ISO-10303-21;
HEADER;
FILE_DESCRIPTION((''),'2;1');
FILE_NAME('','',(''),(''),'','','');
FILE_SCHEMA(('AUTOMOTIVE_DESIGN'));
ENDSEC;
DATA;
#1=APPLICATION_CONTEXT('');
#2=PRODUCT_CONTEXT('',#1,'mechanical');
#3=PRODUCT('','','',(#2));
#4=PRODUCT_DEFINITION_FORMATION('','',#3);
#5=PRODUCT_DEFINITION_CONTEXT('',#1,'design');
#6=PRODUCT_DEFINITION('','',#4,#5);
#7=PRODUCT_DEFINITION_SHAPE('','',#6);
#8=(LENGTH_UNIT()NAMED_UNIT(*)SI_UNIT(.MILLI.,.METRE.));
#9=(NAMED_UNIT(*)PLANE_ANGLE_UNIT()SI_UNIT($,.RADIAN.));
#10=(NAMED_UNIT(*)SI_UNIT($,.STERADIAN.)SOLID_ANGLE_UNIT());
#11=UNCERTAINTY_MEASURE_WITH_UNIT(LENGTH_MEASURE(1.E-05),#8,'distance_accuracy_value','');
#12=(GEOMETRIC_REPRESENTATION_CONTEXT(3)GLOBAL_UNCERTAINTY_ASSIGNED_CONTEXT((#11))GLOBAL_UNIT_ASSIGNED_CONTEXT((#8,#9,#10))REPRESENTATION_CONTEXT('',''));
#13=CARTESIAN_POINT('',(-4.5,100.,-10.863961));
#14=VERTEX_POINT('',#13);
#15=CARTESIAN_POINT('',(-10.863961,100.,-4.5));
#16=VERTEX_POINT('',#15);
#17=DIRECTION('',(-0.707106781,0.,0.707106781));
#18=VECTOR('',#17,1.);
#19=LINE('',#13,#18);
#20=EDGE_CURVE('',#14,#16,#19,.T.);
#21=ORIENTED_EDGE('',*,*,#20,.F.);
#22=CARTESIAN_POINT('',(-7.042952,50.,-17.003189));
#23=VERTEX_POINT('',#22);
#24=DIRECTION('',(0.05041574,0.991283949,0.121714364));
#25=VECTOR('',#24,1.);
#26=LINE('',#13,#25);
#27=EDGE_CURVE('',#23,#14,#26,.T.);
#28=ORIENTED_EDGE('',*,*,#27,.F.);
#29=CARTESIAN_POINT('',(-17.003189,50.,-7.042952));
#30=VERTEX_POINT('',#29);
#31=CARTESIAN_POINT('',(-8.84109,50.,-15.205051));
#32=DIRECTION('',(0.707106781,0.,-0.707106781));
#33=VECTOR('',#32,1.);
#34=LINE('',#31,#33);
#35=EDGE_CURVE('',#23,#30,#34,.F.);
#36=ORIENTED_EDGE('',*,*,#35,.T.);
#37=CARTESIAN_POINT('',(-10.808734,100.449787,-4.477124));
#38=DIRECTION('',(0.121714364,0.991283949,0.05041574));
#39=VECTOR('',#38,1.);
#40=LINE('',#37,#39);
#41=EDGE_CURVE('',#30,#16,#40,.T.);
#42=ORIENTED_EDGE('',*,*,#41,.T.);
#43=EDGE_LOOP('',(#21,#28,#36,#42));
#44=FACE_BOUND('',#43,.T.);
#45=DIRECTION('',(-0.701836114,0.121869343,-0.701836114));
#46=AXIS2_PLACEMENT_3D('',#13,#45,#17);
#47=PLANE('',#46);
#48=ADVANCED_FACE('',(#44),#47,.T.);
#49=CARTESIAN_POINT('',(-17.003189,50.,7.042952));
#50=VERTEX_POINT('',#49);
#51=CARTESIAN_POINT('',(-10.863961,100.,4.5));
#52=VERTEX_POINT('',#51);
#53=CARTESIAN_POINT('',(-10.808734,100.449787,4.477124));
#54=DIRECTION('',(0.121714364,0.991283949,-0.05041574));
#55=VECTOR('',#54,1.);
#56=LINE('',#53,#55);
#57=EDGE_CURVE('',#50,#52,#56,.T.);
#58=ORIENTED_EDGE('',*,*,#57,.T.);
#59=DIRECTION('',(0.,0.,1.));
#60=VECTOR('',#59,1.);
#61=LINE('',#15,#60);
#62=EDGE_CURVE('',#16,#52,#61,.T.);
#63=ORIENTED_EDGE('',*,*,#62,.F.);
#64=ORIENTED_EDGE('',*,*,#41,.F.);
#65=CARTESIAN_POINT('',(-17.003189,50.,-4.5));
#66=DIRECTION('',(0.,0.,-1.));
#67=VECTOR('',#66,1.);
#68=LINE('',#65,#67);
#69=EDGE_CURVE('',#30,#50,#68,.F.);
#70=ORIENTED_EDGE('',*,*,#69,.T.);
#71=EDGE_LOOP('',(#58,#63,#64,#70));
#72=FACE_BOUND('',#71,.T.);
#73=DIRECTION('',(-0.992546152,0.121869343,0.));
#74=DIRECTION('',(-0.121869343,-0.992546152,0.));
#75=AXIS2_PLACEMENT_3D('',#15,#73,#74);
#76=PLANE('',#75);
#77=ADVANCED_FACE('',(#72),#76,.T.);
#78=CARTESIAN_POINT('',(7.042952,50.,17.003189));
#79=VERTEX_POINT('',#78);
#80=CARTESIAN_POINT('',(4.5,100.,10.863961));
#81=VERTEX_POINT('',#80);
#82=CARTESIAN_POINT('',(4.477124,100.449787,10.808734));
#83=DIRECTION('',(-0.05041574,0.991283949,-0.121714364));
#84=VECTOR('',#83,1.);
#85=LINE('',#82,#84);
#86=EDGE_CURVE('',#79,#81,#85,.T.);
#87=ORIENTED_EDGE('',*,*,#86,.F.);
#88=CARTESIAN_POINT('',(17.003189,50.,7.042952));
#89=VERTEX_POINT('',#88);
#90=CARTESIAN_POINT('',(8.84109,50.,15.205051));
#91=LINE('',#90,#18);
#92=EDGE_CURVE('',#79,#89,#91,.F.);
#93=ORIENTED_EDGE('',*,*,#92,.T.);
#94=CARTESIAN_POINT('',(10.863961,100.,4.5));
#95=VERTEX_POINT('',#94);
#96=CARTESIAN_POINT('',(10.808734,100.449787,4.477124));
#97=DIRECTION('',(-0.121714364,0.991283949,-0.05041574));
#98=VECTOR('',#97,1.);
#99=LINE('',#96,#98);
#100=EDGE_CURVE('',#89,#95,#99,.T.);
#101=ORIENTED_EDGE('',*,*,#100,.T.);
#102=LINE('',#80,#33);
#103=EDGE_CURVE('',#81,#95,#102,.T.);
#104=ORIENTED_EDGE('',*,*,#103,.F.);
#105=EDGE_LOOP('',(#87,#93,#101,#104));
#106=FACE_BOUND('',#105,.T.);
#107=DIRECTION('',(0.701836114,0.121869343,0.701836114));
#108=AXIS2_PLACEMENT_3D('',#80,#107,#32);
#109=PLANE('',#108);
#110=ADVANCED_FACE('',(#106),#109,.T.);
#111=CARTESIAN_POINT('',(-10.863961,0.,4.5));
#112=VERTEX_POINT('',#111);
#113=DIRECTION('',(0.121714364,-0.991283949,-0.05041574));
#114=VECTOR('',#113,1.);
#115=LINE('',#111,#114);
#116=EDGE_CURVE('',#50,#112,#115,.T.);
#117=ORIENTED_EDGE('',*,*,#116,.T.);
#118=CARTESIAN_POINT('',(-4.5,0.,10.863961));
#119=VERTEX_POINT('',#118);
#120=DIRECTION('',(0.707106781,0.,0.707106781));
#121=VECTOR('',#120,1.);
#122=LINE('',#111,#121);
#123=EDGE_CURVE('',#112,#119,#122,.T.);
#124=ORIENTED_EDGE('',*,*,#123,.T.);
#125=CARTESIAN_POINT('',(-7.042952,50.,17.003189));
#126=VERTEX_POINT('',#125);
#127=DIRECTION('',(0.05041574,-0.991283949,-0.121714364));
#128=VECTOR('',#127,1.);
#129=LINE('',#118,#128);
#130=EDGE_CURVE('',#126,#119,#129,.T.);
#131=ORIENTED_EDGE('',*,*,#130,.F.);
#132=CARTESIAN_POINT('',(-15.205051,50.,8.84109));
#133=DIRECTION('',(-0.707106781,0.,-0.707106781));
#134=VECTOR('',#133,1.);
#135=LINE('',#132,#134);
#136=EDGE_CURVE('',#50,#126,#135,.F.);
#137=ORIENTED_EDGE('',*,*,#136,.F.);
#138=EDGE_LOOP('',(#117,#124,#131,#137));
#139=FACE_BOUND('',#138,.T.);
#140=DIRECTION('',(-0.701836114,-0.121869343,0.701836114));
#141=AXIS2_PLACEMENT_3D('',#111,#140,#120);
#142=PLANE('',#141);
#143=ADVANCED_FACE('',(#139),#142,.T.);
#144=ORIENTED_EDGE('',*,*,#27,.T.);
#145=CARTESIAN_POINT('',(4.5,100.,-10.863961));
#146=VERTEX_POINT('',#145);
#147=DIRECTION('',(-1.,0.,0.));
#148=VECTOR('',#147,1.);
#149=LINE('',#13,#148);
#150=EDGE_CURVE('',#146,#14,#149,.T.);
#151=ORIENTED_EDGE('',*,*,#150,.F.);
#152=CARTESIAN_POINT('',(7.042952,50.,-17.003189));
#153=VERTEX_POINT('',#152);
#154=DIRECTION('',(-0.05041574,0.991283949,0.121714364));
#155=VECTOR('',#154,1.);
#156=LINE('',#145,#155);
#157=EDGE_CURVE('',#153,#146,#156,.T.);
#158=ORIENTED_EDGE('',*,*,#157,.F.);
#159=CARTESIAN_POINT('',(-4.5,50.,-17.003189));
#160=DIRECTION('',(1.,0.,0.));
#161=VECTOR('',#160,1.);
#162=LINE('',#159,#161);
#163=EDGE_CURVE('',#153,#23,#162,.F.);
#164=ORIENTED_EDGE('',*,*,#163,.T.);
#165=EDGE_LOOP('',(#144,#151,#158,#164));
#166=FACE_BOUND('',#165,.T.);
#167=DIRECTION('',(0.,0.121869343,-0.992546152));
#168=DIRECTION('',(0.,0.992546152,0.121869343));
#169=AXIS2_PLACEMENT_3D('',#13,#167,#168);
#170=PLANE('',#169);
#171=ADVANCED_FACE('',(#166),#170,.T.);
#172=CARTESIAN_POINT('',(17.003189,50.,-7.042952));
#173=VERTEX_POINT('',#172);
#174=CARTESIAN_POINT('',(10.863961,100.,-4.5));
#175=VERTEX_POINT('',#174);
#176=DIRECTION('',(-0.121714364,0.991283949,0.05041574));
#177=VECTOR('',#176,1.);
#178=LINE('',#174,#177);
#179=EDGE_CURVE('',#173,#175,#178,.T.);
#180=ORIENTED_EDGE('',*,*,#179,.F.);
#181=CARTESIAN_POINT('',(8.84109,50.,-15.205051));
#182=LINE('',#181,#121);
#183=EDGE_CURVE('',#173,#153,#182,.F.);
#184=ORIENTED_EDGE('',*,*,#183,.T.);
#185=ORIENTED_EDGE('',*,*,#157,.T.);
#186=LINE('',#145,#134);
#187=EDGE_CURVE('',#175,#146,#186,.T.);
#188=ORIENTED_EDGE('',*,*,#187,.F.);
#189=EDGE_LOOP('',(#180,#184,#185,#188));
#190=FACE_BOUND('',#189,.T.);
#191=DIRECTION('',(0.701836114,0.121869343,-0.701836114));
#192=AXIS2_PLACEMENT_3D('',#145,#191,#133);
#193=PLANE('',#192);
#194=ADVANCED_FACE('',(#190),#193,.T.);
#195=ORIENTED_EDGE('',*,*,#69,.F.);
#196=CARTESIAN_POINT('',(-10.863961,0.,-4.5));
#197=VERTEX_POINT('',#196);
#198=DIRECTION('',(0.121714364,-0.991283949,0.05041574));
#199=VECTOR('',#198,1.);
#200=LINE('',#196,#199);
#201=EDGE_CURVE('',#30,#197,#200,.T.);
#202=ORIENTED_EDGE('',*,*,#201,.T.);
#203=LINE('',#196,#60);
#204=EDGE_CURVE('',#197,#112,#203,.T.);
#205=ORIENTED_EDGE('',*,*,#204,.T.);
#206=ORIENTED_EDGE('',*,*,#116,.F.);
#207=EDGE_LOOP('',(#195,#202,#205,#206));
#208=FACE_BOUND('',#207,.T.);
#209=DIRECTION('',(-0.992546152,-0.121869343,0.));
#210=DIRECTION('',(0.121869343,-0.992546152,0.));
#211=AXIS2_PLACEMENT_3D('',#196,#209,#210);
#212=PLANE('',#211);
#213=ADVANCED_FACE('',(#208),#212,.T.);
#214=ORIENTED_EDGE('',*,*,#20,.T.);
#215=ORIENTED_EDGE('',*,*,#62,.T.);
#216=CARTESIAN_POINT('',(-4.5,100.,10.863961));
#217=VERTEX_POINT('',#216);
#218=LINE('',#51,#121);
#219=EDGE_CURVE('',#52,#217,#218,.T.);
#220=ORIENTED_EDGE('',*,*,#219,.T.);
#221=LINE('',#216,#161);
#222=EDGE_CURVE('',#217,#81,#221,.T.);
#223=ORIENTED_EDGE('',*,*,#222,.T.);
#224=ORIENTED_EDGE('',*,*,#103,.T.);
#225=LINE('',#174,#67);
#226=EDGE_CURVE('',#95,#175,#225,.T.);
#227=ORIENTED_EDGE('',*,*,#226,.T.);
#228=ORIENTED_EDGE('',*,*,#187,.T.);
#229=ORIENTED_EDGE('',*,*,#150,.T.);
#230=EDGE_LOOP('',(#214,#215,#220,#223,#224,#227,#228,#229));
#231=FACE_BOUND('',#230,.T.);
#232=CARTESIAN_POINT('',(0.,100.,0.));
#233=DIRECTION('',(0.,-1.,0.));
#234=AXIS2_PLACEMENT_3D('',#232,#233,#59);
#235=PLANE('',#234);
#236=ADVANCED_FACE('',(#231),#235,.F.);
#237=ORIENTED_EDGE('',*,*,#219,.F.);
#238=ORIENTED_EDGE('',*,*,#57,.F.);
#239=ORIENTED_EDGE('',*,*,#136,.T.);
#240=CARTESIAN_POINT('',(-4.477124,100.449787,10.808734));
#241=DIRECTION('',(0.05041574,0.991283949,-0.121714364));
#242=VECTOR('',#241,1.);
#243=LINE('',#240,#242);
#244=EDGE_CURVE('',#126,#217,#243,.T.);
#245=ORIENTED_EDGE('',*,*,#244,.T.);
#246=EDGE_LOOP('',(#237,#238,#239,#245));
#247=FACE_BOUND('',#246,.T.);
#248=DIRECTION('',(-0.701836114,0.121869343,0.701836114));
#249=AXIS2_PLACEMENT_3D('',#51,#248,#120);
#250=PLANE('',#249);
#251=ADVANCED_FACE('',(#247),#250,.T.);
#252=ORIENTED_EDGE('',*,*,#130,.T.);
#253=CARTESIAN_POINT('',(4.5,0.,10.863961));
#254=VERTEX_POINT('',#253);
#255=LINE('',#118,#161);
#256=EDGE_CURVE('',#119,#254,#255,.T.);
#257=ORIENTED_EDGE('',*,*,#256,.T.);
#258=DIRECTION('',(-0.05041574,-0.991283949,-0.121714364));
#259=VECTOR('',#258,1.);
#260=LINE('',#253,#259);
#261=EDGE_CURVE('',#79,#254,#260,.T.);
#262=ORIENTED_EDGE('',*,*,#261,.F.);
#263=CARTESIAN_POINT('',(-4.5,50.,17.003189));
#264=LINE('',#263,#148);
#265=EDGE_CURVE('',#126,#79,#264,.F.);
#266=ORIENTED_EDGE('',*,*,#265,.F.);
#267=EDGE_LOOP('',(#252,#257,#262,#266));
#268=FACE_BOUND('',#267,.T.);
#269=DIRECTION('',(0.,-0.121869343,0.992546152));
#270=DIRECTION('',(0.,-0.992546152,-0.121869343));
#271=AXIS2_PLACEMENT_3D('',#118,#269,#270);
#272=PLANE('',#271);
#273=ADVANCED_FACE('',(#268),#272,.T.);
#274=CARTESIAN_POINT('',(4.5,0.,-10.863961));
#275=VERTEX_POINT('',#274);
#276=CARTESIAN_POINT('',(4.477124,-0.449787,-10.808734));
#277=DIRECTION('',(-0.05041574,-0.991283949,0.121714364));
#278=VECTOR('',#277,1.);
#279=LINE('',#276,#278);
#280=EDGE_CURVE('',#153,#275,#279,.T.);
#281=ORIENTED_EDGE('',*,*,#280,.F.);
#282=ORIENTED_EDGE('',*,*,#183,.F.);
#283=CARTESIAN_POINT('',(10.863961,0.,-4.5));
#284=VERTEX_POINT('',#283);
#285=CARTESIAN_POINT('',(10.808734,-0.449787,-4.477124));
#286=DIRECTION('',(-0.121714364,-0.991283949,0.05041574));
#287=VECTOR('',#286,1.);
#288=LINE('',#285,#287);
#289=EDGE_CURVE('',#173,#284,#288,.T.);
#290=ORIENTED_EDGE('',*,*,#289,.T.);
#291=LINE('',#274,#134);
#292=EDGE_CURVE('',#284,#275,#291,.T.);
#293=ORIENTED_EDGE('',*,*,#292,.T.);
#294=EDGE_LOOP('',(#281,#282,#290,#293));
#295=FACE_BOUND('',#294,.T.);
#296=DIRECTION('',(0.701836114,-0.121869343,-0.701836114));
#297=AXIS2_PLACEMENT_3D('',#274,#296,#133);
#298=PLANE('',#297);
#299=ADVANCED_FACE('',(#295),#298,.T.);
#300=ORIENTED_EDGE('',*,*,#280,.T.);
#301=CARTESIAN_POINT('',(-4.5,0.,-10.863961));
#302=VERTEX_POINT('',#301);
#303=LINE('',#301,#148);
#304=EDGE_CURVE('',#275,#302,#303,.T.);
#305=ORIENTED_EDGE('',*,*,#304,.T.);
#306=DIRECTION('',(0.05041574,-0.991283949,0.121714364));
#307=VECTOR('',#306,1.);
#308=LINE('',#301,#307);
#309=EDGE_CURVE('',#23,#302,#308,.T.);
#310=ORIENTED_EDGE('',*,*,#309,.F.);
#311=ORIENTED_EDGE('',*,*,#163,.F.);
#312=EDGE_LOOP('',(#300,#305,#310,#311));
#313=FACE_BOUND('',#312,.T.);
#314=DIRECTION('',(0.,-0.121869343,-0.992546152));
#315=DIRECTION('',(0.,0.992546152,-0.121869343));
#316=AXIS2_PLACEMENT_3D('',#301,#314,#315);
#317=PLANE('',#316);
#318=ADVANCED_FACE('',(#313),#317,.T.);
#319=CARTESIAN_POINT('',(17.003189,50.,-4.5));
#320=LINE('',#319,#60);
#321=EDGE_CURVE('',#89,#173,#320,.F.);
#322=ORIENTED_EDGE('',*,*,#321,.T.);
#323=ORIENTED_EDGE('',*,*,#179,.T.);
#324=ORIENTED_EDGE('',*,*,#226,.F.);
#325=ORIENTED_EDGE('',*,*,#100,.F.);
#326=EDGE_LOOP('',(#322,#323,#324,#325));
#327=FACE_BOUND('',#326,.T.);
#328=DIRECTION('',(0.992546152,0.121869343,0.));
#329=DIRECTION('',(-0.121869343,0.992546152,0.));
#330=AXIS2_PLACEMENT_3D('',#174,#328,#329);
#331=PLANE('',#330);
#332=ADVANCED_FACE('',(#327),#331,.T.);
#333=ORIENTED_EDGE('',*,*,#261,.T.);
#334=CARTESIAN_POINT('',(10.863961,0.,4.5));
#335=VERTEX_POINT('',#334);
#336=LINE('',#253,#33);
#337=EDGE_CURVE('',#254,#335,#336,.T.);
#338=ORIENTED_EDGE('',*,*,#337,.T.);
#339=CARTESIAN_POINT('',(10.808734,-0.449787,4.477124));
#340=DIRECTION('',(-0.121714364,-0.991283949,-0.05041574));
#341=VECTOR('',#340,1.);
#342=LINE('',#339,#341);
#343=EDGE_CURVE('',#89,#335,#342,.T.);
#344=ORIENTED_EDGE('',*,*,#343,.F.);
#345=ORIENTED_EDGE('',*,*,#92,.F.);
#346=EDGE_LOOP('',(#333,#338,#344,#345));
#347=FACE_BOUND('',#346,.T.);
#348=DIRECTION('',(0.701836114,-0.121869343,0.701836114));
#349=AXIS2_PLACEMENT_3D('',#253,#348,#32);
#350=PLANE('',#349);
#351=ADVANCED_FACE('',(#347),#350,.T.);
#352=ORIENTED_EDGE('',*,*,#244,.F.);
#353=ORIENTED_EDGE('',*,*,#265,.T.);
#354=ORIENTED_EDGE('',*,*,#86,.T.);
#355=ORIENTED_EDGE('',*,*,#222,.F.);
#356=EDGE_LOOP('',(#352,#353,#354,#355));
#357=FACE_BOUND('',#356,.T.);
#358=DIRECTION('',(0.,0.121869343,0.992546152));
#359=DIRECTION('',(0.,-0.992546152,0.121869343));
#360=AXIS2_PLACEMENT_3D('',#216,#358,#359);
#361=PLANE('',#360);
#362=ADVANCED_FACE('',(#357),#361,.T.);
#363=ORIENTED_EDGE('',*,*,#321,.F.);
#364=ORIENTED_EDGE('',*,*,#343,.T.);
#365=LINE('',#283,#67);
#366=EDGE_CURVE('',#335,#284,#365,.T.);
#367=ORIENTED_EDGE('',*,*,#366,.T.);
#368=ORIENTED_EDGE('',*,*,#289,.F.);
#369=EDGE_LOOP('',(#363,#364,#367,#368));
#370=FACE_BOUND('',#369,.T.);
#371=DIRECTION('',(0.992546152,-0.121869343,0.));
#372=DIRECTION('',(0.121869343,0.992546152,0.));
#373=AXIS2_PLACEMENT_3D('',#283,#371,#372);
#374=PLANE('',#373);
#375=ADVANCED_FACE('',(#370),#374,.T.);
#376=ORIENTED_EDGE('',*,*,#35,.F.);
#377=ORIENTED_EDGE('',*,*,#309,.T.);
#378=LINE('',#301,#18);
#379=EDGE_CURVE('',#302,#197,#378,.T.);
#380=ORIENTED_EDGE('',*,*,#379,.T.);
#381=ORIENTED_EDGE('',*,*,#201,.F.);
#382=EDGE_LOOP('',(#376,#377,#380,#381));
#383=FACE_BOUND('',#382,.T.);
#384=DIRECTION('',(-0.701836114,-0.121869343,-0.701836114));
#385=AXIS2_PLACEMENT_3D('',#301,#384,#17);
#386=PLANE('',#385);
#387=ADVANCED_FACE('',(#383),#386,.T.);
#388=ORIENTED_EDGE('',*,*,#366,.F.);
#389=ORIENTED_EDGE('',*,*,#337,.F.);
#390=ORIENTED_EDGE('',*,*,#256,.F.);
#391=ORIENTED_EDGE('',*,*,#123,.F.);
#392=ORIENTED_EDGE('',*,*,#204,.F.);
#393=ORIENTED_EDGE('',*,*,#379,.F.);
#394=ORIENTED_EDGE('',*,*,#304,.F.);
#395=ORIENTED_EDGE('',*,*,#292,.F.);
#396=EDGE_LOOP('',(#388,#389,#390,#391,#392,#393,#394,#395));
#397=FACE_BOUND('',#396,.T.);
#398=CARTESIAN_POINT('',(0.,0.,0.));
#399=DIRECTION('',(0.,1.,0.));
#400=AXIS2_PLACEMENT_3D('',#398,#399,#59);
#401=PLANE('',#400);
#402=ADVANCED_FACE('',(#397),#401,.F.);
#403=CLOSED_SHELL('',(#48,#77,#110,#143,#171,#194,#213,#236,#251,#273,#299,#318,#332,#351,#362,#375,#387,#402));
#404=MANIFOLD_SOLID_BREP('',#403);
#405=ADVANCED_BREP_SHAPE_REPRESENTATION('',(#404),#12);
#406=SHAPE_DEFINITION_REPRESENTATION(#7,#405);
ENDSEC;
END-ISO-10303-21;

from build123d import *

# Parameters (mm, degrees)
BOSS_EXTRUDE1_DEPTH = 50
BOSS_EXTRUDE1_DRAFT = -7
MIRROR1_DEPTH       = 50
MIRROR1_DRAFT       = 7


# Read off the part's stored shape, not the designer's step: Mirror1
with BuildPart() as part:
    # Sketch2 → Boss-Extrude1 (with draft: the straight prism first)
    with BuildSketch(Plane(origin=(0, 0, 0), x_dir=(1, 0, 0), z_dir=(0, 1, 0))):
        Polygon((-10.863961031, 4.5), (-10.863961031, -4.5), (-4.5, -10.863961031), (4.5, -10.863961031), (10.863961031, -4.5), (10.863961031, 4.5), (4.5, 10.863961031), (-4.5, 10.863961031), align=None)
    extrude(amount=BOSS_EXTRUDE1_DEPTH)
    # Boss-Extrude1: the draft: its side faces are tilted about the plane it starts from
    boss_extrude1_sides = [part.faces().sort_by_distance(p)[0] for p in [
        (-10.863961031, 25, 0),
        (-7.681980515, 25, 7.681980515),
        (0, 25, 10.863961031),
        (7.681980515, 25, 7.681980515),
        (10.863961031, 25, 0),
        (7.681980515, 25, -7.681980515),
        (0, 25, -10.863961031),
        (-7.681980515, 25, -7.681980515),
    ]]
    draft(boss_extrude1_sides, Plane(origin=(0, 0, 0), x_dir=(1, 0, 0), z_dir=(0, 1, 0)), BOSS_EXTRUDE1_DRAFT)


with BuildPart() as mirror1_tool:
    # Mirror1 outline → Mirror1 (with draft: the straight prism first)
    with BuildSketch(Plane(origin=(0, 100, 0), x_dir=(1, 0, 0), z_dir=(0, 1, 0))):
        Polygon((-10.863961031, -4.5), (-4.5, -10.863961031), (4.5, -10.863961031), (10.863961031, -4.5), (10.863961031, 4.5), (4.5, 10.863961031), (-4.5, 10.863961031), (-10.863961031, 4.5), align=None)
    extrude(amount=-MIRROR1_DEPTH)
    # Mirror1: the draft: its side faces are tilted about the plane it starts from
    mirror1_sides = [mirror1_tool.faces().sort_by_distance(p)[0] for p in [
        (-7.681980515, 75, 7.681980516),
        (0, 75, 10.863961031),
        (7.681980516, 75, 7.681980515),
        (10.863961031, 75, 0),
        (7.681980515, 75, -7.681980516),
        (0, 75, -10.863961031),
        (-7.681980516, 75, -7.681980515),
        (-10.863961031, 75, 0),
    ]]
    draft(mirror1_sides, Plane(origin=(0, 100, 0), x_dir=(1, 0, 0), z_dir=(0, 1, 0)), MIRROR1_DRAFT)


with BuildPart() as part_1:
    add(part.part)

    # Mirror1: add mirror1_tool
    add(mirror1_tool.part)


solid = part_1.part
